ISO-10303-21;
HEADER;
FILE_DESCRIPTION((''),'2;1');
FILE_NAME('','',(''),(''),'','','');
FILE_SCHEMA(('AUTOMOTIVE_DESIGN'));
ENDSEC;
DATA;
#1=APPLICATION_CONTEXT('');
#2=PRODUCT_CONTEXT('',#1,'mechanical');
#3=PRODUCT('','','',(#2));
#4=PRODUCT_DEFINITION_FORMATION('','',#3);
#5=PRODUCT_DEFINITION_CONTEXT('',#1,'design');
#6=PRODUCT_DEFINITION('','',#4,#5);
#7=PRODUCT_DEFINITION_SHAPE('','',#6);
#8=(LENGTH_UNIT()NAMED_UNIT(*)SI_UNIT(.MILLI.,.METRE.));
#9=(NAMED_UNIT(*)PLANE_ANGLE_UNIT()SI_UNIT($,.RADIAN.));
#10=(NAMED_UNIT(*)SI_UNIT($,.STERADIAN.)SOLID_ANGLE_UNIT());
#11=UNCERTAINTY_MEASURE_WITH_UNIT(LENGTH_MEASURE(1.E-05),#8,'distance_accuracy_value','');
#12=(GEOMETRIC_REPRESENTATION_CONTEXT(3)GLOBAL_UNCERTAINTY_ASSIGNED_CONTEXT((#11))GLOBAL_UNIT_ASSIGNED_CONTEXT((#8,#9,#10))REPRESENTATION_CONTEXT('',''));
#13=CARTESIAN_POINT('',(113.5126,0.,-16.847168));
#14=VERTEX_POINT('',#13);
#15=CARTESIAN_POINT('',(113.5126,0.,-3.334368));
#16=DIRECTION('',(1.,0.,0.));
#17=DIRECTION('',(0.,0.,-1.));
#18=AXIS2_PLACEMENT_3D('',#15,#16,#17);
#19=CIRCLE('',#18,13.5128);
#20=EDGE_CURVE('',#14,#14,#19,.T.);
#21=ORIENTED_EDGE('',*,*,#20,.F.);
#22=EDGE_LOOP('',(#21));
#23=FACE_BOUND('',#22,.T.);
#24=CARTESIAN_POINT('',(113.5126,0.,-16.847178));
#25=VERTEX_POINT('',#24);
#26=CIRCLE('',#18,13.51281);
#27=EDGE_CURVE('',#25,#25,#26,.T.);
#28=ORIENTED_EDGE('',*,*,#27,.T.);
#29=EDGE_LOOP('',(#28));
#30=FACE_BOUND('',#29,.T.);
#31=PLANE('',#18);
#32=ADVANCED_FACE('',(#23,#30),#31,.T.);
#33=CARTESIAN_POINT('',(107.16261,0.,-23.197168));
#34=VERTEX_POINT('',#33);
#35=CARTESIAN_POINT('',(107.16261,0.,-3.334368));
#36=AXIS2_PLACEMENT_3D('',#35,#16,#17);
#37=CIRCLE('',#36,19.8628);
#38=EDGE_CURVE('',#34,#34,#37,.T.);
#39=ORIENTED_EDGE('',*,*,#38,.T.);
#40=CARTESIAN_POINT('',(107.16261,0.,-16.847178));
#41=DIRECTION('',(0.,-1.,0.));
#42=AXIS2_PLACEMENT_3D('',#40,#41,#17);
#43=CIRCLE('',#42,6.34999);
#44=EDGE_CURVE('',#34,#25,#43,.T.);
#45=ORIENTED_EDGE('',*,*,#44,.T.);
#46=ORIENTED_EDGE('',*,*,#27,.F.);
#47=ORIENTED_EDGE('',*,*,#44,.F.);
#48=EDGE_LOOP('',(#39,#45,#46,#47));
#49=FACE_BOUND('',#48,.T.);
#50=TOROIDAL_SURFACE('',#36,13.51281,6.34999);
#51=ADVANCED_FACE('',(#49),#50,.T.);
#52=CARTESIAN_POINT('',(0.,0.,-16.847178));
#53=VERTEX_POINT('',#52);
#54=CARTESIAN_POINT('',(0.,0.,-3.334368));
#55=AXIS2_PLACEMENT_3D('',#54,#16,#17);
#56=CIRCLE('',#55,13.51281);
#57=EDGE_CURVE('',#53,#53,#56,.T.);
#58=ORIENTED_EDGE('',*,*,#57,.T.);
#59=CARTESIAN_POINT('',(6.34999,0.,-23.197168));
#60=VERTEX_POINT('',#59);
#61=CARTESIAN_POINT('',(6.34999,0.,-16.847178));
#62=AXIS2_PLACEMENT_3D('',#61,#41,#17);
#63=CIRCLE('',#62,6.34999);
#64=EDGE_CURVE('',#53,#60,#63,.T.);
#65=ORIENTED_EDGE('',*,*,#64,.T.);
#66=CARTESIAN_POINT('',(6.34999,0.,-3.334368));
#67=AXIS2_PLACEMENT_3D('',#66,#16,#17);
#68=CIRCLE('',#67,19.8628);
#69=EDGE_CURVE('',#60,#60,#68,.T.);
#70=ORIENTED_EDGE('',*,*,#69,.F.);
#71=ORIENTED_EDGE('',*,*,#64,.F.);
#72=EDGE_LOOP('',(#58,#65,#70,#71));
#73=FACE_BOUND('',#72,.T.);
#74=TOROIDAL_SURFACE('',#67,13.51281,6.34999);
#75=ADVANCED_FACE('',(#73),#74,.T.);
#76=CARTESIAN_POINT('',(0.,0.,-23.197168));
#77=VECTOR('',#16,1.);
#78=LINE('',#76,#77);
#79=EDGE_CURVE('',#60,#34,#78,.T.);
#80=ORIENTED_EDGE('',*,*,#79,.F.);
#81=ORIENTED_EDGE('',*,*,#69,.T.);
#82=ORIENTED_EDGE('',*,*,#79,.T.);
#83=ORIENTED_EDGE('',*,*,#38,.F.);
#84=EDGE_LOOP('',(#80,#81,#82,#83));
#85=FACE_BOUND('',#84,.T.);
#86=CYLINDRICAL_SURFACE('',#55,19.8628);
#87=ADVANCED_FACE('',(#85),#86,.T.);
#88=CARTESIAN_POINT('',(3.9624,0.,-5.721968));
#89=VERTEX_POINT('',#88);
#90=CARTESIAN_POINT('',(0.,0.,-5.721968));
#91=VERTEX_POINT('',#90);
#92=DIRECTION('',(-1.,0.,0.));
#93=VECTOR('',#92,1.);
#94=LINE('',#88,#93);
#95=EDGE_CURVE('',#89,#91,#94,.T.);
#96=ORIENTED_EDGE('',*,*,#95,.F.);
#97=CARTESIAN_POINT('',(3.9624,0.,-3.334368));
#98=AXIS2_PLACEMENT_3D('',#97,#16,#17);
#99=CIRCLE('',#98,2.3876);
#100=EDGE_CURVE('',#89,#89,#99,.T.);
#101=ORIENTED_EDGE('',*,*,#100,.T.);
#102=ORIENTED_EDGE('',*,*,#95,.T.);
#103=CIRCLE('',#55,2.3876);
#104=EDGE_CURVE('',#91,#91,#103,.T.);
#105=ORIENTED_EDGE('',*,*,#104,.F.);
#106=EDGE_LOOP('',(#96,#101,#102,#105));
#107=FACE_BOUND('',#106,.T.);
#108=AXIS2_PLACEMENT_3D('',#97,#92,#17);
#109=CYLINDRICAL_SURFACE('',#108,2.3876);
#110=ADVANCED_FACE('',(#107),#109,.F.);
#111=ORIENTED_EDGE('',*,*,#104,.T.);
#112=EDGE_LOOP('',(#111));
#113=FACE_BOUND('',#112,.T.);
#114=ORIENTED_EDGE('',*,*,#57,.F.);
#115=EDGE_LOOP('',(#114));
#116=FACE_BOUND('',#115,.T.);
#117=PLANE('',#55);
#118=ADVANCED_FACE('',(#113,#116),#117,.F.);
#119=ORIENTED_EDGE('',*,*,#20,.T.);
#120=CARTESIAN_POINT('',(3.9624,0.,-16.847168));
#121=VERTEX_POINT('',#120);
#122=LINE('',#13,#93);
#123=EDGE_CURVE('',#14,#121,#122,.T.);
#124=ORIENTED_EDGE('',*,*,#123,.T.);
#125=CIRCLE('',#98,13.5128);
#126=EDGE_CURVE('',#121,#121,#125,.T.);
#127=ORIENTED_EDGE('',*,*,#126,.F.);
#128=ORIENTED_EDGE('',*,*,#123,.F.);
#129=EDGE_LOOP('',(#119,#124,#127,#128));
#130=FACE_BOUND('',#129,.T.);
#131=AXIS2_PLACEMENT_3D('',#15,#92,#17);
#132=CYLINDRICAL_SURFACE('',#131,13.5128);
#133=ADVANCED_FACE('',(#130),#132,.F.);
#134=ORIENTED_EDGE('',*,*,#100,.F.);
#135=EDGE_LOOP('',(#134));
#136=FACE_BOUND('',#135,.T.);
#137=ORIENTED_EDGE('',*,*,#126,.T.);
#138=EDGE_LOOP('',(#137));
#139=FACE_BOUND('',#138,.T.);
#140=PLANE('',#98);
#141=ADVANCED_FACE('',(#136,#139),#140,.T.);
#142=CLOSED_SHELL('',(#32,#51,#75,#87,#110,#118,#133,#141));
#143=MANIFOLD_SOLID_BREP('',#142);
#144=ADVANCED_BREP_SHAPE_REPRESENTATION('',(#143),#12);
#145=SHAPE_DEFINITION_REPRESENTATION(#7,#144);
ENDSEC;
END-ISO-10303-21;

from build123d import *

# Parameters (mm, degrees)
F2_R = 6.34999


# Not quite as in the source:
# - a fillet or chamfer is up to 0.001 mm smaller than in the source, because OpenCascade refuses the exact size


with BuildPart() as f1:
    # F0 (on Front) → F1 (revolve)
    with BuildSketch(Plane.XZ):
        Polygon((3.9624, -5.7219677535), (0, -5.7219677535), (0, -23.1971677535), (113.5126, -23.1971677535), (113.5126, -16.8471677535), (3.9624, -16.8471677535), align=None)
    revolve(axis=Axis((1.9812, 0, -3.3343677535), (1, 0, 0)))

    # F2 (radius 6.35 in the source; OpenCascade refuses exactly that, so slightly less here)
    f2_edges = [f1.edges().sort_by_distance(p)[0] for p in [
        (0, 0, 16.528432),
        (113.5126, 0, 16.528432),
    ]]
    fillet(f2_edges, radius=F2_R)


solid = f1.part
